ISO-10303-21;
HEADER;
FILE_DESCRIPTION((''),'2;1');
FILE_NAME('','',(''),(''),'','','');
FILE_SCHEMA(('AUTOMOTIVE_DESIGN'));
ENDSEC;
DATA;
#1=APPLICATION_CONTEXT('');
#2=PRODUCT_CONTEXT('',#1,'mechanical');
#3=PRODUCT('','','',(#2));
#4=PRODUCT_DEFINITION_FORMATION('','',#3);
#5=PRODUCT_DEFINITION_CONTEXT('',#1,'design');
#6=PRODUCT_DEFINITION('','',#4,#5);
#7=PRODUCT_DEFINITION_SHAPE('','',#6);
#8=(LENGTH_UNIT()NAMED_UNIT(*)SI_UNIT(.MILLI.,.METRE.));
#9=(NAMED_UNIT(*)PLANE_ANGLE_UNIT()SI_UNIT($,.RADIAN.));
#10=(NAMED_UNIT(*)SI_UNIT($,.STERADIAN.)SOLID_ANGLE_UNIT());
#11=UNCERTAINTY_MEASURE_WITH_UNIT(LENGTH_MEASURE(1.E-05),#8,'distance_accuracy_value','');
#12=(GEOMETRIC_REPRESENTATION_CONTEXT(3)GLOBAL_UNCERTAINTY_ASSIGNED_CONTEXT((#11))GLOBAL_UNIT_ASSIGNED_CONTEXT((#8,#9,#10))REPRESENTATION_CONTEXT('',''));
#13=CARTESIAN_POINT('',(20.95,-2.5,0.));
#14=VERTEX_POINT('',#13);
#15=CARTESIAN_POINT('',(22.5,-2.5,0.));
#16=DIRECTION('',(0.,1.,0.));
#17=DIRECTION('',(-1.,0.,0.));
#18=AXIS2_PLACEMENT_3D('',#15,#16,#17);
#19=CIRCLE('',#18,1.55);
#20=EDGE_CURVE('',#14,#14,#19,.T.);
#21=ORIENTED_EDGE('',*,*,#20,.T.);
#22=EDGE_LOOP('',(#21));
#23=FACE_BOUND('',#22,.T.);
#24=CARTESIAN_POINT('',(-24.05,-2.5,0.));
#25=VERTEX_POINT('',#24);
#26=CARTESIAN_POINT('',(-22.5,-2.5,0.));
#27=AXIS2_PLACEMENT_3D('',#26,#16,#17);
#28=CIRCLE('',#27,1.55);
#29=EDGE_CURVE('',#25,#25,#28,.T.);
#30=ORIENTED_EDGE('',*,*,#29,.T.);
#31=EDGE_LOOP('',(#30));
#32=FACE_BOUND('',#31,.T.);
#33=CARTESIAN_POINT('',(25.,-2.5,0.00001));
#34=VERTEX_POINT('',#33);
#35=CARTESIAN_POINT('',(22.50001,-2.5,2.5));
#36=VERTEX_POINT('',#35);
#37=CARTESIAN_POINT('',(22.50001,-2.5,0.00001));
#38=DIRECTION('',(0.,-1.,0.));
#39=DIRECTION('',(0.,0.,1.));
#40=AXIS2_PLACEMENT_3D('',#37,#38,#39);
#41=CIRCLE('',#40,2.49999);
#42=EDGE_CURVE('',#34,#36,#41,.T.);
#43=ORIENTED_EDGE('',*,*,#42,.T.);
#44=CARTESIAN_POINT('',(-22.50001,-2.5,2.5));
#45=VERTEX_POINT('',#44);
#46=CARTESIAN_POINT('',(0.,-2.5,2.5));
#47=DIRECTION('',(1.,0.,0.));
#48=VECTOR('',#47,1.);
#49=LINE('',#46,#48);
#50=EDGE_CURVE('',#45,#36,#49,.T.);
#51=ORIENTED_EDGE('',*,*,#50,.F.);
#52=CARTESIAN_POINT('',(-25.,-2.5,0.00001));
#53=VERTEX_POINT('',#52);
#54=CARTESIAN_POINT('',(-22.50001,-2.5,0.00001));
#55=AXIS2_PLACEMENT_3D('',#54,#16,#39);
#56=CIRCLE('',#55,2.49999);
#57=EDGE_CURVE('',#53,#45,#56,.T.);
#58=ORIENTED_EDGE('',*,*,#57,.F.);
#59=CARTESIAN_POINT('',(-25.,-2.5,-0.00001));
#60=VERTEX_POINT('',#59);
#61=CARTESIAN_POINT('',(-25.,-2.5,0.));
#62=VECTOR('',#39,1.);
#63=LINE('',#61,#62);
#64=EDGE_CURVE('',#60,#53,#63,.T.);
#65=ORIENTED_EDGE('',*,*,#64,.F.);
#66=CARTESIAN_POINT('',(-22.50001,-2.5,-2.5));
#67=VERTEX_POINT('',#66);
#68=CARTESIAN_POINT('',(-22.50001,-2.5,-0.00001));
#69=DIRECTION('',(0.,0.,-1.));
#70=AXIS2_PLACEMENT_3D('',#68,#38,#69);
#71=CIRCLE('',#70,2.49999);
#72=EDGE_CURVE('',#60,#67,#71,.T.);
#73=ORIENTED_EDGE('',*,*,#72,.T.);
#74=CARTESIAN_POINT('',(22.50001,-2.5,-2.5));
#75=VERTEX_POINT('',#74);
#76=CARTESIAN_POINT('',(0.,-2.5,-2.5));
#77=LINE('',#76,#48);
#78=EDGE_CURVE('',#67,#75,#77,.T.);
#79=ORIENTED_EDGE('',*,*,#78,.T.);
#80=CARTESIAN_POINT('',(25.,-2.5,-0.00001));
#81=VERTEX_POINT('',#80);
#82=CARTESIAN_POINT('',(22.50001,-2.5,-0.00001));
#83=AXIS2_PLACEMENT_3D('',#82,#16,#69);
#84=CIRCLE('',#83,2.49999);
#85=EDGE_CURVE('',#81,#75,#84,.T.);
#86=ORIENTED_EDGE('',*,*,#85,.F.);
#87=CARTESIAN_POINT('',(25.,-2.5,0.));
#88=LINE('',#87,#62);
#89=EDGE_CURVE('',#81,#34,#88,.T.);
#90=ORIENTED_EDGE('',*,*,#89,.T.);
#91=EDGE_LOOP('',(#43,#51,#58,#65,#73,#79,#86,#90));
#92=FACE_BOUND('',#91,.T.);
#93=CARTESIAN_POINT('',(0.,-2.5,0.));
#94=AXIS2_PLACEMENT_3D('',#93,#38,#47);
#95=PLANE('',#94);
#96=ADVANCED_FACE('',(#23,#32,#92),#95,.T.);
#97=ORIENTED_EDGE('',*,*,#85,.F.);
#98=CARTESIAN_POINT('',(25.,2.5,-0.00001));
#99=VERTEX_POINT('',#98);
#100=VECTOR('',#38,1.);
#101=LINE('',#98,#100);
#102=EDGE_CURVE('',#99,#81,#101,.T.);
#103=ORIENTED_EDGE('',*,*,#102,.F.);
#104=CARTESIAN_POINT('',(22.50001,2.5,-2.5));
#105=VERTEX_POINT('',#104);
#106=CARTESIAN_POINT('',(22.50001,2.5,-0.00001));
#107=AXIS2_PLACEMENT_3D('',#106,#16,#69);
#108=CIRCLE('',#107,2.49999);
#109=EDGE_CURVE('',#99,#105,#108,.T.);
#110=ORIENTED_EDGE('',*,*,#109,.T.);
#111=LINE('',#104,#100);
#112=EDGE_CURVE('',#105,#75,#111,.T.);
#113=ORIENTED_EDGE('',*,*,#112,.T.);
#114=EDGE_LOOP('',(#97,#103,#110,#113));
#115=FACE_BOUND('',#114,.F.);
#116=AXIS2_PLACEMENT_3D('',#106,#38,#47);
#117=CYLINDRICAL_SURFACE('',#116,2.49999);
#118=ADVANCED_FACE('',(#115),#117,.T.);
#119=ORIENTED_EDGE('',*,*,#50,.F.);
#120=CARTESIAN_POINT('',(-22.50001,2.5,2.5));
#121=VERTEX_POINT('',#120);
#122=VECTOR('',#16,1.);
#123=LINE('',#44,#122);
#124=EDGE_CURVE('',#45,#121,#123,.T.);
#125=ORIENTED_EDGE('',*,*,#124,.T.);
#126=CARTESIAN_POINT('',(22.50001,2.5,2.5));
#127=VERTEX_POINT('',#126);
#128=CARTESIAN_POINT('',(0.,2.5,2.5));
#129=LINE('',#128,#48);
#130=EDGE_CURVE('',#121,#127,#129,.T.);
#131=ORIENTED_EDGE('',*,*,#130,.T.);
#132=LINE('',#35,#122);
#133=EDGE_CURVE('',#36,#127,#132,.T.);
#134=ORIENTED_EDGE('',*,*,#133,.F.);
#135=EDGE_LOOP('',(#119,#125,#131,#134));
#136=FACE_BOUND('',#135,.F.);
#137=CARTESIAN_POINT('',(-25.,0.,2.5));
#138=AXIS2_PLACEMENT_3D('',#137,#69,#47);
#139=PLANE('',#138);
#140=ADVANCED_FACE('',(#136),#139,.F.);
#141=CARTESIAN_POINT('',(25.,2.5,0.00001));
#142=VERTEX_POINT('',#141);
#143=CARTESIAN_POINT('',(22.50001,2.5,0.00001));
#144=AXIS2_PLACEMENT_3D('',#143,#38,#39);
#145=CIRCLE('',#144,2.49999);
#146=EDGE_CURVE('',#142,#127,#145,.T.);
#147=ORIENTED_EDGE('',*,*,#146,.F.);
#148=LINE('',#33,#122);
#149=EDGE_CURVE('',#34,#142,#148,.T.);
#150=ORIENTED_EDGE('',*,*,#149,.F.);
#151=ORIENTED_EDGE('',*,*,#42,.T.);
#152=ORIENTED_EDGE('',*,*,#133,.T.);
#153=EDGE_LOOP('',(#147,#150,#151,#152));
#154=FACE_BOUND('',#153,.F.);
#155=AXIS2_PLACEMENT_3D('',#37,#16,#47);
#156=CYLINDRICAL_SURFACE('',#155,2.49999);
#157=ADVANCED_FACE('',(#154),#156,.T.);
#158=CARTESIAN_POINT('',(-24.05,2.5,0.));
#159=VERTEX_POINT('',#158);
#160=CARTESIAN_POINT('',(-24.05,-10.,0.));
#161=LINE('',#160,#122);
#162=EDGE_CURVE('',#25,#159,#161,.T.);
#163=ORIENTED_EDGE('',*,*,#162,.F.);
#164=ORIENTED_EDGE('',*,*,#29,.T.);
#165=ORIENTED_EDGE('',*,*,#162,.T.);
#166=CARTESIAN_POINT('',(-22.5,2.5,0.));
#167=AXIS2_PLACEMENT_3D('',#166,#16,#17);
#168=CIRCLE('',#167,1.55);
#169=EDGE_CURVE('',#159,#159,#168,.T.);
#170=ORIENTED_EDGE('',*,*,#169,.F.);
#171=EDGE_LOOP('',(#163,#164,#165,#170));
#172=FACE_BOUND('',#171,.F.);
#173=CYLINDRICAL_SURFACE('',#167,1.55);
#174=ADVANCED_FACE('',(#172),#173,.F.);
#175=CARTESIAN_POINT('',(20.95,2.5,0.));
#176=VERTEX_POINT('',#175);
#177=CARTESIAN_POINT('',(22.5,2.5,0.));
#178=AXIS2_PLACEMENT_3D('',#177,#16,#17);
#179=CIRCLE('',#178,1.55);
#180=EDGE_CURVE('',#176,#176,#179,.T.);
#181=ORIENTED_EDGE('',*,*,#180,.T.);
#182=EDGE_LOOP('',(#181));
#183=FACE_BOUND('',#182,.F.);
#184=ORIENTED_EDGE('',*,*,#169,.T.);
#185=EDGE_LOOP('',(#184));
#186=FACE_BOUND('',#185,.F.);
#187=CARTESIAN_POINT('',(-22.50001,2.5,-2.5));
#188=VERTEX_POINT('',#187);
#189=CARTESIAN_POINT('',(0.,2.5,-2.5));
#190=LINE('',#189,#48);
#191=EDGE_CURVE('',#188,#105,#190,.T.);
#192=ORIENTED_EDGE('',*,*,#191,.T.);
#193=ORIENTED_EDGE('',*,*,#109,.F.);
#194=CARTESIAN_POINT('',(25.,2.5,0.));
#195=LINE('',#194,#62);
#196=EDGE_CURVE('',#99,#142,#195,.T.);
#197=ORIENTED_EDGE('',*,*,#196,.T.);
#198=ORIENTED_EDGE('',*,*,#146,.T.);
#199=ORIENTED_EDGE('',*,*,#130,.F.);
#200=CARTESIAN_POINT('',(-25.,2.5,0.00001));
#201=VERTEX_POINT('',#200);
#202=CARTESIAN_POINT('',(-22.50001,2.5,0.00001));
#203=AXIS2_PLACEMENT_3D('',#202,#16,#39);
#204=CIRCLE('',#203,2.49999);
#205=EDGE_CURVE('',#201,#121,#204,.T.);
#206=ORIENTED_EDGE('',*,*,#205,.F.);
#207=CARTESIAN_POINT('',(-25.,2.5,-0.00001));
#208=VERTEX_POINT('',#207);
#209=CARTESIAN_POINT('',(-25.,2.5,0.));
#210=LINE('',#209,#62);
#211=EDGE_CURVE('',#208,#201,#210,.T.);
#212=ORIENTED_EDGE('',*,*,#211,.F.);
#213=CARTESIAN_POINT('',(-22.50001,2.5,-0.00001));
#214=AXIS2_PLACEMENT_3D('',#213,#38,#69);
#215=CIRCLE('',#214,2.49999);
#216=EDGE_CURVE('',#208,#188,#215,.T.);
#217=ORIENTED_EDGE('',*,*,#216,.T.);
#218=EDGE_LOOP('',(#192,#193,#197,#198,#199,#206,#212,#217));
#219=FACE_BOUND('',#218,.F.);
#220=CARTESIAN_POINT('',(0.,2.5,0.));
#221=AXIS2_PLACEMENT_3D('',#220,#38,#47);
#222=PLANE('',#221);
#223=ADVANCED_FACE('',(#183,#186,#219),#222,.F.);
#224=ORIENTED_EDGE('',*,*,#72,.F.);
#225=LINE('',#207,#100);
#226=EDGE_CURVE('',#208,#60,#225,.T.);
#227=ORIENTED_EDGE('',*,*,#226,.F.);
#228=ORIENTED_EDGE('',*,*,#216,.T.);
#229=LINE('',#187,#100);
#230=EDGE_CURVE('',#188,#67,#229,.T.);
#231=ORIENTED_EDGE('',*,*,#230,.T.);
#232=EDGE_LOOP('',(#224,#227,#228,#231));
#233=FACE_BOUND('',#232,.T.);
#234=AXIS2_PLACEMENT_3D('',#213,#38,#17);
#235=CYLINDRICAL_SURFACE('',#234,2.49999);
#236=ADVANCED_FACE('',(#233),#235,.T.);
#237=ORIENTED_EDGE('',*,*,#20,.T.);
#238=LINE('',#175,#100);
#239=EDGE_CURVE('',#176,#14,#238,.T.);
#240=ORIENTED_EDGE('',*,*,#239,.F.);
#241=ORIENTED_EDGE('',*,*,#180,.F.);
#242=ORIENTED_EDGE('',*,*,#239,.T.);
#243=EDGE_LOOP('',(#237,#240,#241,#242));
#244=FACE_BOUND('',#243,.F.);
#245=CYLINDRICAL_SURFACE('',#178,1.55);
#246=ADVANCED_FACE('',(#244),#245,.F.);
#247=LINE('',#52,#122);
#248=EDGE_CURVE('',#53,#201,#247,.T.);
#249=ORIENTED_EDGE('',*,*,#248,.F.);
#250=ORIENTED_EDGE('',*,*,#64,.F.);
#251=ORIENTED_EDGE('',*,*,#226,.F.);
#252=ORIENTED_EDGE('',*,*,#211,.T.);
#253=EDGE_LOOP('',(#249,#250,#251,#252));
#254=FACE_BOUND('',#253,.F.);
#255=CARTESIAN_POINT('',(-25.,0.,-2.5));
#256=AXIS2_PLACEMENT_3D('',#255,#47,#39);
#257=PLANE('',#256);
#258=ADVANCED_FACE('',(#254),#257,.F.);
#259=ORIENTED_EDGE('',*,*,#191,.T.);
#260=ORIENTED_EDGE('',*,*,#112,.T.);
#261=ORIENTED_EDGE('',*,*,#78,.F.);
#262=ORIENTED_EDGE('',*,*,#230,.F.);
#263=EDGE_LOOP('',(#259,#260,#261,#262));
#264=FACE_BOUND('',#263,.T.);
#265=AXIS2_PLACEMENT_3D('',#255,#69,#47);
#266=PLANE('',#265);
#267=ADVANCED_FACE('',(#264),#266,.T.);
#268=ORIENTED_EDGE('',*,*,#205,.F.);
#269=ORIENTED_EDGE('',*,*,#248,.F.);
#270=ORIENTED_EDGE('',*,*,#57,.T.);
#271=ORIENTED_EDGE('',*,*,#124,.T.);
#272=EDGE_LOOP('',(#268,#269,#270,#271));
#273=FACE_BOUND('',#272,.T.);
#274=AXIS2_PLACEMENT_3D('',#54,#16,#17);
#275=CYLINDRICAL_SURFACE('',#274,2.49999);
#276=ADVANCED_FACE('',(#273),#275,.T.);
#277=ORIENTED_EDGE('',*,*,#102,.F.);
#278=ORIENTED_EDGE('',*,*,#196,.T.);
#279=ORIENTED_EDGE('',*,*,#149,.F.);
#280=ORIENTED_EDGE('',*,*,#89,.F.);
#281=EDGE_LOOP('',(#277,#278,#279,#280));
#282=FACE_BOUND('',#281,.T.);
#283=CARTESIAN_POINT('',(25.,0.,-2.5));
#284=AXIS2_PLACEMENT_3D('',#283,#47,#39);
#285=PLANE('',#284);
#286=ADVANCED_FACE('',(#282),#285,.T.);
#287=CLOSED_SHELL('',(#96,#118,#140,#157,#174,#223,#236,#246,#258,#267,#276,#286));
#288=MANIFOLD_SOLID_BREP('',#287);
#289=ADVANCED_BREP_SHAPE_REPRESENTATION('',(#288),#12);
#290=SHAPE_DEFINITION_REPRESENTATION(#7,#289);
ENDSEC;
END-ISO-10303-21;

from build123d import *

# Parameters (mm, degrees)
F0_W     = 50
F0_H     = 5
F1_DEPTH = 2.5
F2_R     = 2.49999
F3_R     = 1.55
F4_DEPTH = 12.5


# Not quite as in the source:
# - a fillet or chamfer is up to 0.001 mm smaller than in the source, because OpenCascade refuses the exact size


with BuildPart() as f1:
    # F0 (on Front) → F1 (new body, symmetric)
    with BuildSketch(Plane.XZ):
        Rectangle(F0_W, F0_H)
    extrude(amount=F1_DEPTH, both=True)

    # F2 (radius 2.5 in the source; OpenCascade refuses exactly that, so slightly less here)
    f2_edges = [f1.edges().sort_by_distance(p)[0] for p in [
        (25, 0, 2.5),
        (25, 0, -2.5),
        (-25, 0, 2.5),
        (-25, 0, -2.5),
    ]]
    fillet(f2_edges, radius=F2_R)

    # F3 (on face) → F4 (cut, symmetric)
    with BuildSketch(Plane(origin=(0, 2.5, 0), x_dir=(-1, 0, 0), z_dir=(0, 1, 0))):
        with Locations((-22.5, 0)):
            Circle(F3_R)
        with Locations((22.5, 0)):
            Circle(F3_R)
    extrude(amount=F4_DEPTH, both=True, mode=Mode.SUBTRACT)


solid = f1.part
